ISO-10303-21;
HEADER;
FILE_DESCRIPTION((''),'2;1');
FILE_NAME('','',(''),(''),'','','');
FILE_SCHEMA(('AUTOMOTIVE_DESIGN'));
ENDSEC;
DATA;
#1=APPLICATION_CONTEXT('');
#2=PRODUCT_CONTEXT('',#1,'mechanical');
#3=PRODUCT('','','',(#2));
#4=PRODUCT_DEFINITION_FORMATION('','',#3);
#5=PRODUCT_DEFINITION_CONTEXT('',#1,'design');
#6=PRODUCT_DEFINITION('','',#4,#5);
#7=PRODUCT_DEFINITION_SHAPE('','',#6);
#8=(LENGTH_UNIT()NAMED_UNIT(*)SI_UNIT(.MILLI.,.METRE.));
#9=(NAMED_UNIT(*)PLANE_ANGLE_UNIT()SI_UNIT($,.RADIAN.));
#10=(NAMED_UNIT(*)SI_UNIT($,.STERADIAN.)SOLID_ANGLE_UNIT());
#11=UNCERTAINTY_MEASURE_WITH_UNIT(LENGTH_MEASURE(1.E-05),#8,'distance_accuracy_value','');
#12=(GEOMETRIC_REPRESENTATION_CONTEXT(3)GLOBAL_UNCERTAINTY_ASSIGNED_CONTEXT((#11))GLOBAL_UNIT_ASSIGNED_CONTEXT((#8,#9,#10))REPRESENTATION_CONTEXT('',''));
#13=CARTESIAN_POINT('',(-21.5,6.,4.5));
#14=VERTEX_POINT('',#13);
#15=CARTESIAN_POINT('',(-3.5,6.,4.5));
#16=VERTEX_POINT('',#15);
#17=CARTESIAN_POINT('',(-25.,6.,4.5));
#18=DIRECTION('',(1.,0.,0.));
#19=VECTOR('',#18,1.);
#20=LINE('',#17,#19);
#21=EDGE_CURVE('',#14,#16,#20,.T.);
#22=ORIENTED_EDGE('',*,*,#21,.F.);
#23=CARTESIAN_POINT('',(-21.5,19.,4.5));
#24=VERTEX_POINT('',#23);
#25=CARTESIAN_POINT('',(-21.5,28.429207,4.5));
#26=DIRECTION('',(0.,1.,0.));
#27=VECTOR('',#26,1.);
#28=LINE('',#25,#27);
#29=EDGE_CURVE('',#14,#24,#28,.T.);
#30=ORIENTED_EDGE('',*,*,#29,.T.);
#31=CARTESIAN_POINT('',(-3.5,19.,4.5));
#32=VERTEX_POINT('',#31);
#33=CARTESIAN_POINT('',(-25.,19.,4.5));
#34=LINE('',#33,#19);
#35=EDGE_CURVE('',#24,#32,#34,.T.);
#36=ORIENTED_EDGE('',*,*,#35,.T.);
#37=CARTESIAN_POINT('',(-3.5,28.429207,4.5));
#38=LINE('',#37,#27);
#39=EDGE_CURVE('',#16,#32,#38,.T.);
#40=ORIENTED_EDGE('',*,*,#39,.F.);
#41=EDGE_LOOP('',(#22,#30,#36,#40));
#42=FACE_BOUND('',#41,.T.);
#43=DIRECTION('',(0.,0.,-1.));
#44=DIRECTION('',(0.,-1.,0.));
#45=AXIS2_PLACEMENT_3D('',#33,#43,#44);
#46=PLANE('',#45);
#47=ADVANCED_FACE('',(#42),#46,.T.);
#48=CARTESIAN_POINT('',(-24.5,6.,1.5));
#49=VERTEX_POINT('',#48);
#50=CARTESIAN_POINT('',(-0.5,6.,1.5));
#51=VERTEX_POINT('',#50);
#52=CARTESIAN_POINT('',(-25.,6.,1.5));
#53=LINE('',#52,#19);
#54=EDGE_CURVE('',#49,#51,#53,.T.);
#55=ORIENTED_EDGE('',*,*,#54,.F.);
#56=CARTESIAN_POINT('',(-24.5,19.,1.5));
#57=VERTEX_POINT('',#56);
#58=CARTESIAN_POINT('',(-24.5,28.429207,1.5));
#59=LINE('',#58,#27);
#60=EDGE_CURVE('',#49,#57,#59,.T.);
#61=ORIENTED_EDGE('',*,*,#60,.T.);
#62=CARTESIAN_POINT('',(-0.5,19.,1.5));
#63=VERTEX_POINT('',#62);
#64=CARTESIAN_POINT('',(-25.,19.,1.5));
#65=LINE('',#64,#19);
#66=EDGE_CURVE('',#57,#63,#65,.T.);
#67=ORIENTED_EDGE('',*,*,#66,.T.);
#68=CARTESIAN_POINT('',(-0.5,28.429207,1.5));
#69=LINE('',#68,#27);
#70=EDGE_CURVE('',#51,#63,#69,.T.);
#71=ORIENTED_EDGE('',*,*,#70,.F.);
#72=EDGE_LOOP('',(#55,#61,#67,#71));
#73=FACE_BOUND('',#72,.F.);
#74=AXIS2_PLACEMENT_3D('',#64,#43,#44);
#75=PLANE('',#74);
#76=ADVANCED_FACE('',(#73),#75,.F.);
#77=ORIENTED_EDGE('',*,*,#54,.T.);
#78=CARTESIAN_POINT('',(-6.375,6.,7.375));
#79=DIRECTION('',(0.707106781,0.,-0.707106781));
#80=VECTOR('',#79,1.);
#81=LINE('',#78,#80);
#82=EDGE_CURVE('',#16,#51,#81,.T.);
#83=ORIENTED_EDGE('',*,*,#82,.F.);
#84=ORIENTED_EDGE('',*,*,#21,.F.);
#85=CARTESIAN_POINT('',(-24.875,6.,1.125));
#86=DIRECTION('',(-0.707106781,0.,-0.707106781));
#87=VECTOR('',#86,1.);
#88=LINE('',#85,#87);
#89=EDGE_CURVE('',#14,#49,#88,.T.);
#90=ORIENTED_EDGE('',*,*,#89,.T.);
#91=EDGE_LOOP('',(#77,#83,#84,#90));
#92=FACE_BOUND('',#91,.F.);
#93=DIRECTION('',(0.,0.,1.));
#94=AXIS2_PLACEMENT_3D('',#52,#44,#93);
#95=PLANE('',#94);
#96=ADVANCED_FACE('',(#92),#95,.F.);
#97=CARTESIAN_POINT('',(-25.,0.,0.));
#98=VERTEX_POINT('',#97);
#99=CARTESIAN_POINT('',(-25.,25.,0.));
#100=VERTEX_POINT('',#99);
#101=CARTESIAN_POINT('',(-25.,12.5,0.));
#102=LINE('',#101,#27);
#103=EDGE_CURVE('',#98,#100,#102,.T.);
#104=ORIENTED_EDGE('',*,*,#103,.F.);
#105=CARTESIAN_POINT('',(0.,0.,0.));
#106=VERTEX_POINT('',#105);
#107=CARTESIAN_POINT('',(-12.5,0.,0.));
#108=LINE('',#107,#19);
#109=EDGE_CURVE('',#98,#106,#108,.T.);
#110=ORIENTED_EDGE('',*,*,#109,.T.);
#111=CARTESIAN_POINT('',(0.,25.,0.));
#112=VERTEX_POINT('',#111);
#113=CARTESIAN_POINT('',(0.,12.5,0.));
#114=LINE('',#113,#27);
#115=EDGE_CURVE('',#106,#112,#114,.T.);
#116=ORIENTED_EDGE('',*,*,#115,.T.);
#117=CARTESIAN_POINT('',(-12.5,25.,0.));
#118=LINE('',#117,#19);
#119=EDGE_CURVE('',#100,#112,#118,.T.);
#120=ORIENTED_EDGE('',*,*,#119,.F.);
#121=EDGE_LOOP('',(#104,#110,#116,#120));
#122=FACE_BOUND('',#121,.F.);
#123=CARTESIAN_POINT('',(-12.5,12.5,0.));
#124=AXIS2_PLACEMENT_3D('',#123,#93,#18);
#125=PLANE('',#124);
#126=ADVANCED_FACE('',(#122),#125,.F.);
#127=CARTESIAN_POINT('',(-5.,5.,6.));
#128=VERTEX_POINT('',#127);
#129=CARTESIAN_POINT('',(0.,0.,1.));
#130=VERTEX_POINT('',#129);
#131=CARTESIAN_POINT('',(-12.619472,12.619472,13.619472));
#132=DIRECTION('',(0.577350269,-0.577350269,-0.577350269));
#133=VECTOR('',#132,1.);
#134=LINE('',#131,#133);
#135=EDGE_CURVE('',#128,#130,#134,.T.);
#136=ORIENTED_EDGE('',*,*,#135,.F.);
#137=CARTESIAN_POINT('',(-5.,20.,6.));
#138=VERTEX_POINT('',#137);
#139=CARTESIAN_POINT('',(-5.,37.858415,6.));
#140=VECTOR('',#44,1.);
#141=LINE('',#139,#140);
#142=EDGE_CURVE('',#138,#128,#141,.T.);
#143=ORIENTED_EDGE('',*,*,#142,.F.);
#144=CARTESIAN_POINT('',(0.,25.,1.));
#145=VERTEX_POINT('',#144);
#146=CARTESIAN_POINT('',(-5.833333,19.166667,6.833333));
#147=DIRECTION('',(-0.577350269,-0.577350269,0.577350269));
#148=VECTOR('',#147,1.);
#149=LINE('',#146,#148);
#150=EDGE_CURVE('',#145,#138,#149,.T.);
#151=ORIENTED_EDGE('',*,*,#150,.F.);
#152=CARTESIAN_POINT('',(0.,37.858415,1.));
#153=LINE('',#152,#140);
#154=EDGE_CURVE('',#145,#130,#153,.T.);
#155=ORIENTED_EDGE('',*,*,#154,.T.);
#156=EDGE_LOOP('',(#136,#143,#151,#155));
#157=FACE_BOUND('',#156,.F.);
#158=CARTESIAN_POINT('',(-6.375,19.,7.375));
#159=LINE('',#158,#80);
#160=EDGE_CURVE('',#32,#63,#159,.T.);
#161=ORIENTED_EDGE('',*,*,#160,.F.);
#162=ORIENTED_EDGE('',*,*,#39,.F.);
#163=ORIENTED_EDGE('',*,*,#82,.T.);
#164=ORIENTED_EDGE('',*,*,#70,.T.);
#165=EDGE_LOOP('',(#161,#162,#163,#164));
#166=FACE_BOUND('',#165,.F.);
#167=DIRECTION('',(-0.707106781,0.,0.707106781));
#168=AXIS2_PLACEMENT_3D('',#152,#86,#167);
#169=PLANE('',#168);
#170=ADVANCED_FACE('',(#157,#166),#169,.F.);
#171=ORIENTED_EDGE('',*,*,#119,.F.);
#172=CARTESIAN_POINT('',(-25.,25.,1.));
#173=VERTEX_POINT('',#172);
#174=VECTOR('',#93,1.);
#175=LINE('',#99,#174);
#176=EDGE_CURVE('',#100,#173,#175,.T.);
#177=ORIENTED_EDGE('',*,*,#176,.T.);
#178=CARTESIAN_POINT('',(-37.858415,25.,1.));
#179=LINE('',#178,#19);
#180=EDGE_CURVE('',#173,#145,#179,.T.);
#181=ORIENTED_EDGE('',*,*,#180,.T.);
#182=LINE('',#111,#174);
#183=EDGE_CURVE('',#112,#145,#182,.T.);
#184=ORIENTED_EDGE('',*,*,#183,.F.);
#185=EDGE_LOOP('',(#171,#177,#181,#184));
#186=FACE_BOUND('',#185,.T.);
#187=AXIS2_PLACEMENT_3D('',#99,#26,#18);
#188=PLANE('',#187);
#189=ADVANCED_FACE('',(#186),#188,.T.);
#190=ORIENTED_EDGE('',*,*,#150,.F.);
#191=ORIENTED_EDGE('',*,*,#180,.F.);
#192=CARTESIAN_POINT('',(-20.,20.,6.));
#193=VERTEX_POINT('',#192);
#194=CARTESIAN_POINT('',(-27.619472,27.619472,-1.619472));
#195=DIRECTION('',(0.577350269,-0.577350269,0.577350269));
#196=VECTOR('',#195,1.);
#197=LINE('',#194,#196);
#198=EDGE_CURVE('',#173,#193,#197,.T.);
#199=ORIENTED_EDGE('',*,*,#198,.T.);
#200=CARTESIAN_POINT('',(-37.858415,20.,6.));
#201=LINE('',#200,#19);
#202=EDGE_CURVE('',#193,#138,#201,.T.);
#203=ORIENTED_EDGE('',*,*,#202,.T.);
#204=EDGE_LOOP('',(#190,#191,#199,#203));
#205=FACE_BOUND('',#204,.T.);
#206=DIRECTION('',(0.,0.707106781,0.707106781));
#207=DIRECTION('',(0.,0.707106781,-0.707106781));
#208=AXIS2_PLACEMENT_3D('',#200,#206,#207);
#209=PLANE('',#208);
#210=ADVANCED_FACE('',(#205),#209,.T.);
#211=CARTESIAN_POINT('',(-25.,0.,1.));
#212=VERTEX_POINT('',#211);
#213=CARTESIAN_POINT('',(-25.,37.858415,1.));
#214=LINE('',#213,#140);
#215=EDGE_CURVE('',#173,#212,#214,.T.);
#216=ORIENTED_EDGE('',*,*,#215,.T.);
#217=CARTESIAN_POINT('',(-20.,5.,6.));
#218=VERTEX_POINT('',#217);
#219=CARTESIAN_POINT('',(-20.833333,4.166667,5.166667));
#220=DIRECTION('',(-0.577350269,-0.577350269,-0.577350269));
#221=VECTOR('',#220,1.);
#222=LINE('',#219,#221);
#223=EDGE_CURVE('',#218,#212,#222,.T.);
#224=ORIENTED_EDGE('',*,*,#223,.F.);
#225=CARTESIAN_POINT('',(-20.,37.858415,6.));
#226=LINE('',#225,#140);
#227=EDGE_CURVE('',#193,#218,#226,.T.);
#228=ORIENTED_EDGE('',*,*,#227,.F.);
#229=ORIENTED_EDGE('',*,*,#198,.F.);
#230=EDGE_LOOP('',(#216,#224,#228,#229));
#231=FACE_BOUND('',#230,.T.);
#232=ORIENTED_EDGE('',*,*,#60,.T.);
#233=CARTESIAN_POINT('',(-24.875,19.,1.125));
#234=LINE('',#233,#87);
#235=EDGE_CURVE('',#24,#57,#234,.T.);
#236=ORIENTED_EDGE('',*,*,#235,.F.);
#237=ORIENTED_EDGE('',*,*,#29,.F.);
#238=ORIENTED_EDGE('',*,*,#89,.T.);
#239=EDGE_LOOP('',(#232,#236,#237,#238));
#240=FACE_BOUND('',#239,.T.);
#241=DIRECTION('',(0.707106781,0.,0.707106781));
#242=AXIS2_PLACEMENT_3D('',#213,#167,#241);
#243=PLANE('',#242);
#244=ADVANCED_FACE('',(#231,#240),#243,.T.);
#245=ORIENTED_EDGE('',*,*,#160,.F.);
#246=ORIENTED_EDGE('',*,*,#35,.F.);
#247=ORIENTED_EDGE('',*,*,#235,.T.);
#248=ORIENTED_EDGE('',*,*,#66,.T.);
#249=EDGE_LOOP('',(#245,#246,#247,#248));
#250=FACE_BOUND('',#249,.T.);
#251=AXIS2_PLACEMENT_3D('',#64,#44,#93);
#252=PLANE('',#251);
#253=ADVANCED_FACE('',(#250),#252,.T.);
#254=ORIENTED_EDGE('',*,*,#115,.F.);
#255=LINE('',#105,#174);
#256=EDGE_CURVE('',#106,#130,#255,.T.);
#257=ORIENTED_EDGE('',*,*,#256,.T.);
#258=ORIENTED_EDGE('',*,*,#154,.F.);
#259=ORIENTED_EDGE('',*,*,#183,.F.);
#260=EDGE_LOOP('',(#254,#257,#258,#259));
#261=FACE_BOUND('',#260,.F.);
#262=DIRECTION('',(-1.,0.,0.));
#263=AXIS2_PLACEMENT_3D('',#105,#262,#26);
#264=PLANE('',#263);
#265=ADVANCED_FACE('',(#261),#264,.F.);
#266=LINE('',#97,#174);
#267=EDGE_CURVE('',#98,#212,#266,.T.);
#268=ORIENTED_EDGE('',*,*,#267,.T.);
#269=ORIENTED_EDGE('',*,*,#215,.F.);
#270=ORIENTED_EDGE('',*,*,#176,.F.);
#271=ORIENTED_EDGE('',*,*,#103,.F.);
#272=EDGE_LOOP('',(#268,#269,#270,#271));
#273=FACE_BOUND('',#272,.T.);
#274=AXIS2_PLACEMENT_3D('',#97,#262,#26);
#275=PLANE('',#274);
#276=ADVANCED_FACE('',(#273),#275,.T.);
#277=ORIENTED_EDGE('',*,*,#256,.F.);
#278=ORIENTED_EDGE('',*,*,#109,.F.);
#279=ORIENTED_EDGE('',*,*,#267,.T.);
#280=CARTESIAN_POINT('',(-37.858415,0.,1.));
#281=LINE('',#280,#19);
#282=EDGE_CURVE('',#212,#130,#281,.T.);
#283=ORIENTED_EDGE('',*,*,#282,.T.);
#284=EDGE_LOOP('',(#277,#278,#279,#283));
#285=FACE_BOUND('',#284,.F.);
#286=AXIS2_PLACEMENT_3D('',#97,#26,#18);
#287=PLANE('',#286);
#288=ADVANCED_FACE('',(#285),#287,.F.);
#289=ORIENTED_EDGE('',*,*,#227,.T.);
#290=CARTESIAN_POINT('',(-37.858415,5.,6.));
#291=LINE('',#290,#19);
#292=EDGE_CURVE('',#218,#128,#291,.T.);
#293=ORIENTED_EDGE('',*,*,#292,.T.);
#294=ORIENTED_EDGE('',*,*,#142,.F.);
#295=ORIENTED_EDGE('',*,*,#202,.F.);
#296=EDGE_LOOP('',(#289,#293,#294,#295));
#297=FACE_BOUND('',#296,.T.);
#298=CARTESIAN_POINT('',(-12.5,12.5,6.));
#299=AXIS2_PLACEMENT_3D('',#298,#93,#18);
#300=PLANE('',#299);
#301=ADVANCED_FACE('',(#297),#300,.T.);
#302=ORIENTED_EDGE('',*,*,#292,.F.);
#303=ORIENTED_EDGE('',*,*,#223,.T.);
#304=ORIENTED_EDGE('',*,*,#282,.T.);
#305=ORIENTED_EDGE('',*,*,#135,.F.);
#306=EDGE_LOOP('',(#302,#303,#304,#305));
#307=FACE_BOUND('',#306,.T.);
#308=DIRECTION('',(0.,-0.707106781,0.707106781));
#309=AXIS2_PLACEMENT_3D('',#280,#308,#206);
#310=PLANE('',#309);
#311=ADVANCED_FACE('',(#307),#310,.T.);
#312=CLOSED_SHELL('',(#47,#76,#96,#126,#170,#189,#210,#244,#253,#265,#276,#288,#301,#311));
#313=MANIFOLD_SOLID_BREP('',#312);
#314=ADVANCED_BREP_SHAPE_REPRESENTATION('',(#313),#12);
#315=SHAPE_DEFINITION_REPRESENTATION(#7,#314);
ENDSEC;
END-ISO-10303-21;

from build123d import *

# Parameters (mm, degrees)
F0_W        = 25
F0_H        = 25
F1_DEPTH    = 6
F2_W        = 13
F2_H        = 3
F3_DEPTH    = 25
F4_T1_DEPTH = 50.7168298797
F4_T3_DEPTH = 50.7168298797


# Not quite as in the source:
# - a fillet or chamfer that OpenCascade refuses, or shapes differently, is made with other operations: its cross-section is extruded or revolved along the edge and cut away or added


with BuildPart() as f1:
    # F0 (on Top) → F1 (new body)
    with BuildSketch(Plane.XY):
        with Locations((-12.5, 12.5)):
            Rectangle(F0_W, F0_H)
    extrude(amount=F1_DEPTH)

    # F2 (on face) → F3 (cut)
    with BuildSketch(Plane(origin=(-25, 0, 0), x_dir=(0, -1, 0), z_dir=(-1, 0, 0))):
        with Locations((-12.5, 3)):
            Rectangle(F2_W, F2_H)
    extrude(amount=-F3_DEPTH, mode=Mode.SUBTRACT)

    # F4: chamfer of 5 on 4 edges, made by hand

    # F4_s2 → F4_t1 (cut)
    with BuildSketch(Plane.YZ.offset(-37.8584149398)):
        Polygon((0, 1), (5, 6), (0, 6), align=None)
        Polygon((20, 6), (25, 1), (25, 6), align=None)
    extrude(amount=F4_T1_DEPTH, mode=Mode.SUBTRACT)

    # F4_s4 → F4_t3 (cut)
    with BuildSketch(Plane.XZ.offset(-37.8584149398)):
        Polygon((-25, 1), (-20, 6), (-25, 6), align=None)
        Polygon((0, 1), (-5, 6), (0, 6), align=None)
    extrude(amount=F4_T3_DEPTH, mode=Mode.SUBTRACT)


solid = f1.part
